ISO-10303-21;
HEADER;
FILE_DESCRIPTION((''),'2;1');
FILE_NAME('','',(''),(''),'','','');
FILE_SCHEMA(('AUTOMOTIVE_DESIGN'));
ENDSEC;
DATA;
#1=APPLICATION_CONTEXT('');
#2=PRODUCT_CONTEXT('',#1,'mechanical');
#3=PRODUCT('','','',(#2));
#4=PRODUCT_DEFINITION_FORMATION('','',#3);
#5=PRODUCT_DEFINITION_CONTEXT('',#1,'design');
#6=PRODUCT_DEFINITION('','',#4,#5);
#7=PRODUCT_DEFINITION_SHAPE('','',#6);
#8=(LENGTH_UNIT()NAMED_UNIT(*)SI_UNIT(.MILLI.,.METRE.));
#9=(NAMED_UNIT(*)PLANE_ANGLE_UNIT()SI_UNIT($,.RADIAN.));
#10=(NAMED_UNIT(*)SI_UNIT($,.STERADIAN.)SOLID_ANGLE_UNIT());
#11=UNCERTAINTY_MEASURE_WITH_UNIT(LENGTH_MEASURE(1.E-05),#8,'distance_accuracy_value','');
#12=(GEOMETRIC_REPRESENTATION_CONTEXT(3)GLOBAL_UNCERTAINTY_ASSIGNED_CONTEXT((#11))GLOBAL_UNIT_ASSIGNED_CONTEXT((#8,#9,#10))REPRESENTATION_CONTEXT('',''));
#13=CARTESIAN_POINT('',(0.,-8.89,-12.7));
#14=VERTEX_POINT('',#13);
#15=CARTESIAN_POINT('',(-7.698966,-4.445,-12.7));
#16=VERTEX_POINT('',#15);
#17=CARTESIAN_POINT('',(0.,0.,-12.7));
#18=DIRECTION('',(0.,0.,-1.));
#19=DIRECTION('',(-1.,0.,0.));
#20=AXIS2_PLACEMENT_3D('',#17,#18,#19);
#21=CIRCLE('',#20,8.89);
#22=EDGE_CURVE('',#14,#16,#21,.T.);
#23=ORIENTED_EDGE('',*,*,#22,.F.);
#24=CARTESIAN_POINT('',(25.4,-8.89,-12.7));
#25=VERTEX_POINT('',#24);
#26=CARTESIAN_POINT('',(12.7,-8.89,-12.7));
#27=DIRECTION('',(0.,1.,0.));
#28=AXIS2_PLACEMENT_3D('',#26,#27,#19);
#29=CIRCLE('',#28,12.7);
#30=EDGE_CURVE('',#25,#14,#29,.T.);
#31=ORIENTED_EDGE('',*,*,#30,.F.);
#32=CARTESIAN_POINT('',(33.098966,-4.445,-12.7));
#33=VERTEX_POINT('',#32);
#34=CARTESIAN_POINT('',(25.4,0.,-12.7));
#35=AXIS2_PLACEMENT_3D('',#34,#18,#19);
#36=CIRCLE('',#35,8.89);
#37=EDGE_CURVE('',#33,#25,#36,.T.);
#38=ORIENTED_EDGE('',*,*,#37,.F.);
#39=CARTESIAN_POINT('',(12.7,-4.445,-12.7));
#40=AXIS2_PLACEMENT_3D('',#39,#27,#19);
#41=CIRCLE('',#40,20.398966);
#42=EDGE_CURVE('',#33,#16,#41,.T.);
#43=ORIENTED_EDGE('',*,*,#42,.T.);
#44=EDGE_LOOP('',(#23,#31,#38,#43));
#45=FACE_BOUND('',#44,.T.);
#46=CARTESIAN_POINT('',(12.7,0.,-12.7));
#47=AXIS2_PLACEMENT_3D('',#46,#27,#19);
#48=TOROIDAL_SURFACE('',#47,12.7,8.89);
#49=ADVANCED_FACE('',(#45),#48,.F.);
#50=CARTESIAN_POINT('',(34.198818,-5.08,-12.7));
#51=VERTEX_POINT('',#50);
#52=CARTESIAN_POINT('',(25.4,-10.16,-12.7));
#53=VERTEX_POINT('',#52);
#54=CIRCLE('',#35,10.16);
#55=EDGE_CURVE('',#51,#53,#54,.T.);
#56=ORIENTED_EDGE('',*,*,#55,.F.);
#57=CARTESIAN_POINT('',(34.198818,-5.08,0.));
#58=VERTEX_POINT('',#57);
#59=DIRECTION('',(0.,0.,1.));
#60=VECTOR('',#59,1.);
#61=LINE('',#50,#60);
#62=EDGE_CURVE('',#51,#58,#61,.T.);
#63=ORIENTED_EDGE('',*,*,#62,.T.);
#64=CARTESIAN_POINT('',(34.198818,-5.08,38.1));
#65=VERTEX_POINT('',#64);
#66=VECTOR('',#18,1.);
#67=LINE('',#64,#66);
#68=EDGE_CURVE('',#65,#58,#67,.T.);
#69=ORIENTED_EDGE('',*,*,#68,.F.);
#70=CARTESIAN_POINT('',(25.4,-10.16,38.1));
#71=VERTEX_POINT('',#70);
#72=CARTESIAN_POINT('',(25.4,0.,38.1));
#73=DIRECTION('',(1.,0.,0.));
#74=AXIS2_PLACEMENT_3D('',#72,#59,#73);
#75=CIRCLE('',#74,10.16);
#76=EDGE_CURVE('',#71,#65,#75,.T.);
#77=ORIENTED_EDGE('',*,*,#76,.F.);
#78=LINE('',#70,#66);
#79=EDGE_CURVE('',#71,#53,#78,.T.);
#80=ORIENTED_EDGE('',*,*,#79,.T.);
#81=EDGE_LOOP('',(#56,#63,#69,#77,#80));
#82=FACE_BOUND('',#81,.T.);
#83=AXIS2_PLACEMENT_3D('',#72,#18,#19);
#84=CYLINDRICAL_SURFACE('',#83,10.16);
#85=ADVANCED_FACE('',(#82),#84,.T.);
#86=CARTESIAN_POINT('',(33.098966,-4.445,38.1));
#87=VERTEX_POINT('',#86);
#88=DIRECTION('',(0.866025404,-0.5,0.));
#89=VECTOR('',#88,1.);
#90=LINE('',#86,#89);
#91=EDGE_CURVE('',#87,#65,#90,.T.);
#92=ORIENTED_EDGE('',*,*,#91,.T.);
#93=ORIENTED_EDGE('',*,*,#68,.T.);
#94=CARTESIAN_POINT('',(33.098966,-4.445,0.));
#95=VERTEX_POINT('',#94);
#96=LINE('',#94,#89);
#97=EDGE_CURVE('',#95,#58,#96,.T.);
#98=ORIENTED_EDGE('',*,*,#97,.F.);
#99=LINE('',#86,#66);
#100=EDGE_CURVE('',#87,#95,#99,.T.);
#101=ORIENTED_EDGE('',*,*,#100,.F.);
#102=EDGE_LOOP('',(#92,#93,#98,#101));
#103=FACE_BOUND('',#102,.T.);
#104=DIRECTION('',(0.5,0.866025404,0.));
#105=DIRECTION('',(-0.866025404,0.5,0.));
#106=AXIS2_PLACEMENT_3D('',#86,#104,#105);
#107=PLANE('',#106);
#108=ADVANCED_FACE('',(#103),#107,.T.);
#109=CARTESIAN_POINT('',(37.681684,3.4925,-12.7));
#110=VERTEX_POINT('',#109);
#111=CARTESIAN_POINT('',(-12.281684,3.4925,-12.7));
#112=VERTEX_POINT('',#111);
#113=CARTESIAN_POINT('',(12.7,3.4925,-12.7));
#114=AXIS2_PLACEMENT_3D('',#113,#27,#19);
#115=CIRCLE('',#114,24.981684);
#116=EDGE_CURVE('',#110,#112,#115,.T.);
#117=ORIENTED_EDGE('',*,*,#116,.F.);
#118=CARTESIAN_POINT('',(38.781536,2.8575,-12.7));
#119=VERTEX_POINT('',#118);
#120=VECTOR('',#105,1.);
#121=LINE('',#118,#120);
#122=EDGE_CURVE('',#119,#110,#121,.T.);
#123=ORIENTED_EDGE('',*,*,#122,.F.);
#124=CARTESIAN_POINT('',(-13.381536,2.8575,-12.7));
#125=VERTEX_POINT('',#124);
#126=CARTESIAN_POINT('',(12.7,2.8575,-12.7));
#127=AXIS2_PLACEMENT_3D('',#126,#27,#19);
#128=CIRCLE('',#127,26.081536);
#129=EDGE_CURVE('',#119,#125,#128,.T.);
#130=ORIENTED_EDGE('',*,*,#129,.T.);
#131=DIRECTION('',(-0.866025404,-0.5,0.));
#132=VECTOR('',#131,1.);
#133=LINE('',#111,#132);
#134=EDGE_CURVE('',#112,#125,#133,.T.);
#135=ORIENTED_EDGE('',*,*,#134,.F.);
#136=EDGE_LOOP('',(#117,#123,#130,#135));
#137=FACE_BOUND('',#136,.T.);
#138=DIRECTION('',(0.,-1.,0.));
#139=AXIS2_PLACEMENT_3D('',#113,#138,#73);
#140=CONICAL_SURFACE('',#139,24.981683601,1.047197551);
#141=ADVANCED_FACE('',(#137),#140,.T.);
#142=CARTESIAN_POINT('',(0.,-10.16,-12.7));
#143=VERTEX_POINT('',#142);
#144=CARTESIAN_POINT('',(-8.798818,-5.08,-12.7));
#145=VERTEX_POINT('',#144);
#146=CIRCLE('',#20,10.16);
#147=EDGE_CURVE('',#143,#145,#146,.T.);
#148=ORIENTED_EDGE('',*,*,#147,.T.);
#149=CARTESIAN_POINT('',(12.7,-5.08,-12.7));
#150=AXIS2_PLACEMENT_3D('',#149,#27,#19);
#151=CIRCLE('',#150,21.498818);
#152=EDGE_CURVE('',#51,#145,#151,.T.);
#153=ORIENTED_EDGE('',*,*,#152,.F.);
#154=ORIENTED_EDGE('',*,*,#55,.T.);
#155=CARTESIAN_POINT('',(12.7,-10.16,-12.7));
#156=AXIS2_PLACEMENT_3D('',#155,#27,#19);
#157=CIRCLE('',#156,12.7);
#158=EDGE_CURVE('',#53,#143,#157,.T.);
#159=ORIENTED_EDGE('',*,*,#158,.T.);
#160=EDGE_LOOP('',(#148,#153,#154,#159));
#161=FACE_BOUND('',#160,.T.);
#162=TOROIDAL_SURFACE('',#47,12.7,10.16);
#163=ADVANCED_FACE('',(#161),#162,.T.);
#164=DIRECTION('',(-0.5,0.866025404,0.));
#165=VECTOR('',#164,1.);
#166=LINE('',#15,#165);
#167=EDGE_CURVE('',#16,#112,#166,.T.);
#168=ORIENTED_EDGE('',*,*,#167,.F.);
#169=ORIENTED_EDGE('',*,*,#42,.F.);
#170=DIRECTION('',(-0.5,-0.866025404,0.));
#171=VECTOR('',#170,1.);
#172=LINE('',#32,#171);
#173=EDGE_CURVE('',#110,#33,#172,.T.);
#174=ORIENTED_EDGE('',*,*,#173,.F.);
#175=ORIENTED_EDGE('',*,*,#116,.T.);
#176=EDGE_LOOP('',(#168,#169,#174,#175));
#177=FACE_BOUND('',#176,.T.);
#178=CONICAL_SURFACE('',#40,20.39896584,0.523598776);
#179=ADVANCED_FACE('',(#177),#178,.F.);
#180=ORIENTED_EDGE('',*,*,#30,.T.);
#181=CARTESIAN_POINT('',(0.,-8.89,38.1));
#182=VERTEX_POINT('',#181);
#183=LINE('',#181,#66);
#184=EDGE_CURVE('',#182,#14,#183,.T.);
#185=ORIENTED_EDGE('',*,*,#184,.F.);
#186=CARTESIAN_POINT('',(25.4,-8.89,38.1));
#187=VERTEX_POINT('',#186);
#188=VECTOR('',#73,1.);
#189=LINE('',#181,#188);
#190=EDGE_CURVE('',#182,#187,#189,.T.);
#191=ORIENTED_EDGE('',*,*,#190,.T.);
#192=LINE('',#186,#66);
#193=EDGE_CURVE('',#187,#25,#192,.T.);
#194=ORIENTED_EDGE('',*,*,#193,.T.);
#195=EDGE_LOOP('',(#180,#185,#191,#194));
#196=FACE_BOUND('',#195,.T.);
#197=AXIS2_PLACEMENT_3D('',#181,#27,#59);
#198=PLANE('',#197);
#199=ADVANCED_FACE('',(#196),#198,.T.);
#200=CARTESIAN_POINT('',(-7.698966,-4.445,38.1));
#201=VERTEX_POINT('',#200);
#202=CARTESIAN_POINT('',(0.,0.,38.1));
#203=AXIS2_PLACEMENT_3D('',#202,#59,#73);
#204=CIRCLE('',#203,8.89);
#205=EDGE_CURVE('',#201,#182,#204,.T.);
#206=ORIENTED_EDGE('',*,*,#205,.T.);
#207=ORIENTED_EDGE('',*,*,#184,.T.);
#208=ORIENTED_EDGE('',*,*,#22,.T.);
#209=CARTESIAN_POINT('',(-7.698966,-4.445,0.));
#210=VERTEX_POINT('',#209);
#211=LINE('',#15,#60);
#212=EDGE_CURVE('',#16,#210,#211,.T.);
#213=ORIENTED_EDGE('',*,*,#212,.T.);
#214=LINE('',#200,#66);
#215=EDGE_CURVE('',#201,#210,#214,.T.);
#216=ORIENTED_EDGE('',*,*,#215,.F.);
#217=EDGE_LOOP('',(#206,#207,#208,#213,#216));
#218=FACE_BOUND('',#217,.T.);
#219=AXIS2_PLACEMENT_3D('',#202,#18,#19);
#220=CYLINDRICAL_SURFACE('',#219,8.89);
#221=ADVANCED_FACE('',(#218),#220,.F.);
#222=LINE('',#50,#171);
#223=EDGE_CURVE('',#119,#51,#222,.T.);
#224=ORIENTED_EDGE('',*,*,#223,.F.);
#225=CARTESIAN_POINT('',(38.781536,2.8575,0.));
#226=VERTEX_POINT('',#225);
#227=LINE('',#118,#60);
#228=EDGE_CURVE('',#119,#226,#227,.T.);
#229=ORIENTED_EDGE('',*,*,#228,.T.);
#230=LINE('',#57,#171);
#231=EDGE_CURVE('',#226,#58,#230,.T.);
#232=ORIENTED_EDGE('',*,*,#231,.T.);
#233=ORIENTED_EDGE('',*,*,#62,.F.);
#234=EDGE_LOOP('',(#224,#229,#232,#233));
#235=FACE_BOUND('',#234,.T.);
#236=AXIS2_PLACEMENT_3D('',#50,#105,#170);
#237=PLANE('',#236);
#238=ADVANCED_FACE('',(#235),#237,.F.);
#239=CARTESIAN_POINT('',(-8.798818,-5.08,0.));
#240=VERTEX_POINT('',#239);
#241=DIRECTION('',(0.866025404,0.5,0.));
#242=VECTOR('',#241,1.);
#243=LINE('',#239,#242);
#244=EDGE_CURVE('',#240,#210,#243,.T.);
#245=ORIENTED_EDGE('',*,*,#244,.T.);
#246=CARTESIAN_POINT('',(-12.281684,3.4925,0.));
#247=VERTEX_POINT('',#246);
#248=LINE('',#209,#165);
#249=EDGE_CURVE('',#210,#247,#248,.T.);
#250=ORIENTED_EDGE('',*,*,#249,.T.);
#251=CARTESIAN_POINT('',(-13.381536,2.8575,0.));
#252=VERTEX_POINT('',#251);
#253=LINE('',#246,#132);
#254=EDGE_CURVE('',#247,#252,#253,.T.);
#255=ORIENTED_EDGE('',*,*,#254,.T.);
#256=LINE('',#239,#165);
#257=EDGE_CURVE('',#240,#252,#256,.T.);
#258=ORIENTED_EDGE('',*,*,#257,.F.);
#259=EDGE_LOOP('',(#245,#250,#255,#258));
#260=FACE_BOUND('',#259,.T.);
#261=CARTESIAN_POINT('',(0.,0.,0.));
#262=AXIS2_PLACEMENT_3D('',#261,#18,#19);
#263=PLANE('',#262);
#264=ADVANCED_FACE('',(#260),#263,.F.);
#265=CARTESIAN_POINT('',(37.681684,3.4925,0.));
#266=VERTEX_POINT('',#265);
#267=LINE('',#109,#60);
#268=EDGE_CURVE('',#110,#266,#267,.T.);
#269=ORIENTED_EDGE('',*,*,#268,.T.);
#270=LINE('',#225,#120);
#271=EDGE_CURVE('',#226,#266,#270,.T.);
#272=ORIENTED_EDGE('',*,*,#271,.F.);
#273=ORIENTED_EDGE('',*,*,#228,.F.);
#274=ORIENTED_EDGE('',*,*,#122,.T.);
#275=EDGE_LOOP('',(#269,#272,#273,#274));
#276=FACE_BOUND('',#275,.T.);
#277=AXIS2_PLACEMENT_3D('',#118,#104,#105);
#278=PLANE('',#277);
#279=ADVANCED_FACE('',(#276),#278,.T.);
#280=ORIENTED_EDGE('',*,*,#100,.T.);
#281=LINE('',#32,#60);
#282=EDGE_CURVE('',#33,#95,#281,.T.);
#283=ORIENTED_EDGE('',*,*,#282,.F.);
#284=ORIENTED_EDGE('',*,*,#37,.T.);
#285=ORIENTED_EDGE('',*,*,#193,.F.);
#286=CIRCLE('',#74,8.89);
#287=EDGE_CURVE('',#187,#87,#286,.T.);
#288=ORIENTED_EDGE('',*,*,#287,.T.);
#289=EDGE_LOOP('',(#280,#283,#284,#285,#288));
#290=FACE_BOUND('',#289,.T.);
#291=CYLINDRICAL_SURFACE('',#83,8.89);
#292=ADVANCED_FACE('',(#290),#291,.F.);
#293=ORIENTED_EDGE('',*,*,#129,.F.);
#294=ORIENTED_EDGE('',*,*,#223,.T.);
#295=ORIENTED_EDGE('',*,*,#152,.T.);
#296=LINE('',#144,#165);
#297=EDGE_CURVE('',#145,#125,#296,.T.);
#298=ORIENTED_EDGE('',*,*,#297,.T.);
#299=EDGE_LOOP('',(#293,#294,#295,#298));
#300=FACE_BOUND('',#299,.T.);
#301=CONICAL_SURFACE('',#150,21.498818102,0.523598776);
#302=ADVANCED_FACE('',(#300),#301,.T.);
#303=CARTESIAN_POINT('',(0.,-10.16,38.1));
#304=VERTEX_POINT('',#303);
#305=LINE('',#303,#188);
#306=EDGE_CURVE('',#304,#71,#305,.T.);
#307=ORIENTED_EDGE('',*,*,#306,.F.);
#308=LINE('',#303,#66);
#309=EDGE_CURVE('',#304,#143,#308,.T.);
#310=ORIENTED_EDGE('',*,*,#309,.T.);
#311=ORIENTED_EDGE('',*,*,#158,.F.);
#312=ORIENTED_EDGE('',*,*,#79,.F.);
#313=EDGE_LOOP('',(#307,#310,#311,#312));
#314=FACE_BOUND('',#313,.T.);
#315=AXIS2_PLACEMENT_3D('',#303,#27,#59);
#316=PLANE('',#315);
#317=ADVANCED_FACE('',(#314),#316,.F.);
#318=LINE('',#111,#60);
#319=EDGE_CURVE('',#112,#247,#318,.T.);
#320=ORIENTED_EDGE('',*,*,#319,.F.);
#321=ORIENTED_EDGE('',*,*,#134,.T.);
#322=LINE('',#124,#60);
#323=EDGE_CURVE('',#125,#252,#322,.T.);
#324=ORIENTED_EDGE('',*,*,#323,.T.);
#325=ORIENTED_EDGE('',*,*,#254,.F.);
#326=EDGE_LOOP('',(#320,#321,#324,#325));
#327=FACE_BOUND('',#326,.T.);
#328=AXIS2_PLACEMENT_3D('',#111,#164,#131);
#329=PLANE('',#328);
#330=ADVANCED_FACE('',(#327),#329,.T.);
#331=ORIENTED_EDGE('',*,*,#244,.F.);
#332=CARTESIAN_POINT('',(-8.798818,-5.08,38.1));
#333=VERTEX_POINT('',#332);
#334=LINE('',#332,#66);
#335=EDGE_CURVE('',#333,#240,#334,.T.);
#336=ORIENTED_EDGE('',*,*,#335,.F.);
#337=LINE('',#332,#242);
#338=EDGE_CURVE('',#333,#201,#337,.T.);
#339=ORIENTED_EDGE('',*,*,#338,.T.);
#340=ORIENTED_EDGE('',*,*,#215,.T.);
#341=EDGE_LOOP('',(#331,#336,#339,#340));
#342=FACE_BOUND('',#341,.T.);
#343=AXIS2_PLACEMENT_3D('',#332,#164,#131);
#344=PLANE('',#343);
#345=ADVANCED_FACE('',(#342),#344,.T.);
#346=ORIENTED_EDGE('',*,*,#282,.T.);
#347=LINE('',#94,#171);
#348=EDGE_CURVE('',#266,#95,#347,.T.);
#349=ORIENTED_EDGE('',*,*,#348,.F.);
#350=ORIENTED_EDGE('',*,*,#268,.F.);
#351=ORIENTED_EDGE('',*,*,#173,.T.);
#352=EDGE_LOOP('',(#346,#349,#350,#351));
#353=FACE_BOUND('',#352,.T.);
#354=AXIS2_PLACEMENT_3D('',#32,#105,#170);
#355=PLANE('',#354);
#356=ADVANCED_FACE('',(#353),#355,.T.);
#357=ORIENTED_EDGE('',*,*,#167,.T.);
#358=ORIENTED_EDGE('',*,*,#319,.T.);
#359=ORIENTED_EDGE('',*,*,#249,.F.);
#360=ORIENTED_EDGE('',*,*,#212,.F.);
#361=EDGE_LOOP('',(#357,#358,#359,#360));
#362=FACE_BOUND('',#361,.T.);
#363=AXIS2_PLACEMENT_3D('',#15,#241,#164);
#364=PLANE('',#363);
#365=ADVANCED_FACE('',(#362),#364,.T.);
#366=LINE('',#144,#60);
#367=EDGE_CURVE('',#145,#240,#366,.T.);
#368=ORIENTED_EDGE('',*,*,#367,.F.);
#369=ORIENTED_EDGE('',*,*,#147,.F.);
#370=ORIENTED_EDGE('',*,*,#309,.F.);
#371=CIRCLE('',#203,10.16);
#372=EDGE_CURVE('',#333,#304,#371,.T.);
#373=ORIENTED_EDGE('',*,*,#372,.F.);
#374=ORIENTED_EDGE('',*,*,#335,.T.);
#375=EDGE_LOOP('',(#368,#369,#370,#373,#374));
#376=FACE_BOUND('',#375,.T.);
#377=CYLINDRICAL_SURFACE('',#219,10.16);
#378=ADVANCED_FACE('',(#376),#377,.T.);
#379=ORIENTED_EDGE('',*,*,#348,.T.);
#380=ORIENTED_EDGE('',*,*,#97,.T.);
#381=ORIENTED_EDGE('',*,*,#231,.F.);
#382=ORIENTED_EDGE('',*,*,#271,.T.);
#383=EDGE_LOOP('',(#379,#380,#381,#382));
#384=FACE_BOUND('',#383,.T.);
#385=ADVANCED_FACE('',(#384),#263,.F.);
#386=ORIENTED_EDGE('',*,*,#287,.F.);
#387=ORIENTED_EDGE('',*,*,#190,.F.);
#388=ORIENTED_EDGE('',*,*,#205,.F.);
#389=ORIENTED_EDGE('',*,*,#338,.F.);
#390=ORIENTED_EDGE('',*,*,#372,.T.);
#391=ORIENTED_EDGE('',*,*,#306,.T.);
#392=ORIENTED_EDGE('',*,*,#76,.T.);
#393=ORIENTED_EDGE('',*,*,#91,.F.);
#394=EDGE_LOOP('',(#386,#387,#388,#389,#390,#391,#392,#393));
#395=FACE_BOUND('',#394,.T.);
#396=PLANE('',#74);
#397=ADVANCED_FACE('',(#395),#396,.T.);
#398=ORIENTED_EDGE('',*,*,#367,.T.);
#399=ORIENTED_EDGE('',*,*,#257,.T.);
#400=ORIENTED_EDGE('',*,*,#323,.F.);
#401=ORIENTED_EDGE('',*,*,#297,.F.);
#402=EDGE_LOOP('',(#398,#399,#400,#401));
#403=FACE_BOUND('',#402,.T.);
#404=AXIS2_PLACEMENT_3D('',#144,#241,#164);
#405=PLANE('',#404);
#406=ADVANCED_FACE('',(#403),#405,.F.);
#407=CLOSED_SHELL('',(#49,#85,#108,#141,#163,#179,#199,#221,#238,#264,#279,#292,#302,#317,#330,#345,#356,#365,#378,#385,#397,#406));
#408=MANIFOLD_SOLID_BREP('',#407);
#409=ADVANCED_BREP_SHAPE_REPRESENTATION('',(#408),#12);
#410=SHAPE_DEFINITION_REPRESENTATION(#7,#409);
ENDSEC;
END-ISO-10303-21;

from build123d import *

# Parameters (mm, degrees)
EXTRUDE_THIN1_DEPTH = 38.1
EXTRUDE_THIN2_START = 12.7
EXTRUDE_THIN2_DEPTH = 12.7
REVOLVE_THIN1_ANGLE = 180
EXTRUDE_THIN3_START = -10.16
EXTRUDE_THIN3_DEPTH = 1.27


# Read off the part's stored shape, not the designer's step: Extrude-Thin3
with BuildPart() as part:
    # Sketch1 → Extrude-Thin1 (new body)
    with BuildSketch(Plane.XY):
        with BuildLine():
            ThreePointArc((-8.798818102, -5.08), (-5.08, -8.798818102), (0, -10.16))
            Line((0, -10.16), (25.4, -10.16))
            ThreePointArc((25.4, -10.16), (30.48, -8.798818102), (34.198818102, -5.08))
            Line((34.198818102, -5.08), (33.09896584, -4.445))
            ThreePointArc((33.09896584, -4.445), (29.845, -7.69896584), (25.4, -8.89))
            Line((25.4, -8.89), (0, -8.89))
            ThreePointArc((0, -8.89), (-4.445, -7.69896584), (-7.69896584, -4.445))
            Line((-7.69896584, -4.445), (-8.798818102, -5.08))
        make_face()
    extrude(amount=EXTRUDE_THIN1_DEPTH)

    # Sketch2 → Extrude-Thin2 (add)
    with BuildSketch(Plane(origin=(0, 0, 0), x_dir=(-1, 0, 0), z_dir=(0, 0, -1)).offset(EXTRUDE_THIN2_START)):
        with BuildLine():
            Line((-38.781535864, 2.8575), (-34.198818102, -5.08))
            ThreePointArc((-34.198818102, -5.08), (-30.48, -8.798818102), (-25.4, -10.16))
            Line((-25.4, -10.16), (0, -10.16))
            ThreePointArc((0, -10.16), (5.08, -8.798818102), (8.798818102, -5.08))
            Line((8.798818102, -5.08), (13.381535864, 2.8575))
            Line((13.381535864, 2.8575), (12.281683601, 3.4925))
            Line((12.281683601, 3.4925), (7.69896584, -4.445))
            ThreePointArc((7.69896584, -4.445), (4.445, -7.69896584), (0, -8.89))
            Line((0, -8.89), (-25.4, -8.89))
            ThreePointArc((-25.4, -8.89), (-29.845, -7.69896584), (-33.09896584, -4.445))
            Line((-33.09896584, -4.445), (-37.681683601, 3.4925))
            Line((-37.681683601, 3.4925), (-38.781535864, 2.8575))
        make_face()
    extrude(amount=-EXTRUDE_THIN2_DEPTH)

    # Sketch3 → Revolve-Thin1 (revolve)
    with BuildSketch(Plane(origin=(0, 0, -12.7), x_dir=(-1, 0, 0), z_dir=(0, 0, -1))):
        with BuildLine():
            ThreePointArc((0, -10.16), (5.08, -8.798818102), (8.798818102, -5.08))
            Line((8.798818102, -5.08), (13.381535864, 2.8575))
            Line((13.381535864, 2.8575), (12.281683601, 3.4925))
            Line((12.281683601, 3.4925), (7.69896584, -4.445))
            ThreePointArc((7.69896584, -4.445), (4.445, -7.69896584), (0, -8.89))
            Line((0, -8.89), (0, -10.16))
        make_face()
    revolve(axis=Axis((12.7, -10.16, -12.7), (0, -1, 0)), revolution_arc=REVOLVE_THIN1_ANGLE)

    # Extrude-Thin3 outline → Extrude-Thin3 (add)
    with BuildSketch(Plane(origin=(0, 0, 0), x_dir=(1, 0, 0), z_dir=(0, 1, 0)).offset(EXTRUDE_THIN3_START)):
        with BuildLine():
            Line((0, 12.7), (25.4, 12.7))
            ThreePointArc((25.4, 12.7), (12.7, 25.4), (0, 12.7))
        make_face()
    extrude(amount=EXTRUDE_THIN3_DEPTH)


solid = part.part
